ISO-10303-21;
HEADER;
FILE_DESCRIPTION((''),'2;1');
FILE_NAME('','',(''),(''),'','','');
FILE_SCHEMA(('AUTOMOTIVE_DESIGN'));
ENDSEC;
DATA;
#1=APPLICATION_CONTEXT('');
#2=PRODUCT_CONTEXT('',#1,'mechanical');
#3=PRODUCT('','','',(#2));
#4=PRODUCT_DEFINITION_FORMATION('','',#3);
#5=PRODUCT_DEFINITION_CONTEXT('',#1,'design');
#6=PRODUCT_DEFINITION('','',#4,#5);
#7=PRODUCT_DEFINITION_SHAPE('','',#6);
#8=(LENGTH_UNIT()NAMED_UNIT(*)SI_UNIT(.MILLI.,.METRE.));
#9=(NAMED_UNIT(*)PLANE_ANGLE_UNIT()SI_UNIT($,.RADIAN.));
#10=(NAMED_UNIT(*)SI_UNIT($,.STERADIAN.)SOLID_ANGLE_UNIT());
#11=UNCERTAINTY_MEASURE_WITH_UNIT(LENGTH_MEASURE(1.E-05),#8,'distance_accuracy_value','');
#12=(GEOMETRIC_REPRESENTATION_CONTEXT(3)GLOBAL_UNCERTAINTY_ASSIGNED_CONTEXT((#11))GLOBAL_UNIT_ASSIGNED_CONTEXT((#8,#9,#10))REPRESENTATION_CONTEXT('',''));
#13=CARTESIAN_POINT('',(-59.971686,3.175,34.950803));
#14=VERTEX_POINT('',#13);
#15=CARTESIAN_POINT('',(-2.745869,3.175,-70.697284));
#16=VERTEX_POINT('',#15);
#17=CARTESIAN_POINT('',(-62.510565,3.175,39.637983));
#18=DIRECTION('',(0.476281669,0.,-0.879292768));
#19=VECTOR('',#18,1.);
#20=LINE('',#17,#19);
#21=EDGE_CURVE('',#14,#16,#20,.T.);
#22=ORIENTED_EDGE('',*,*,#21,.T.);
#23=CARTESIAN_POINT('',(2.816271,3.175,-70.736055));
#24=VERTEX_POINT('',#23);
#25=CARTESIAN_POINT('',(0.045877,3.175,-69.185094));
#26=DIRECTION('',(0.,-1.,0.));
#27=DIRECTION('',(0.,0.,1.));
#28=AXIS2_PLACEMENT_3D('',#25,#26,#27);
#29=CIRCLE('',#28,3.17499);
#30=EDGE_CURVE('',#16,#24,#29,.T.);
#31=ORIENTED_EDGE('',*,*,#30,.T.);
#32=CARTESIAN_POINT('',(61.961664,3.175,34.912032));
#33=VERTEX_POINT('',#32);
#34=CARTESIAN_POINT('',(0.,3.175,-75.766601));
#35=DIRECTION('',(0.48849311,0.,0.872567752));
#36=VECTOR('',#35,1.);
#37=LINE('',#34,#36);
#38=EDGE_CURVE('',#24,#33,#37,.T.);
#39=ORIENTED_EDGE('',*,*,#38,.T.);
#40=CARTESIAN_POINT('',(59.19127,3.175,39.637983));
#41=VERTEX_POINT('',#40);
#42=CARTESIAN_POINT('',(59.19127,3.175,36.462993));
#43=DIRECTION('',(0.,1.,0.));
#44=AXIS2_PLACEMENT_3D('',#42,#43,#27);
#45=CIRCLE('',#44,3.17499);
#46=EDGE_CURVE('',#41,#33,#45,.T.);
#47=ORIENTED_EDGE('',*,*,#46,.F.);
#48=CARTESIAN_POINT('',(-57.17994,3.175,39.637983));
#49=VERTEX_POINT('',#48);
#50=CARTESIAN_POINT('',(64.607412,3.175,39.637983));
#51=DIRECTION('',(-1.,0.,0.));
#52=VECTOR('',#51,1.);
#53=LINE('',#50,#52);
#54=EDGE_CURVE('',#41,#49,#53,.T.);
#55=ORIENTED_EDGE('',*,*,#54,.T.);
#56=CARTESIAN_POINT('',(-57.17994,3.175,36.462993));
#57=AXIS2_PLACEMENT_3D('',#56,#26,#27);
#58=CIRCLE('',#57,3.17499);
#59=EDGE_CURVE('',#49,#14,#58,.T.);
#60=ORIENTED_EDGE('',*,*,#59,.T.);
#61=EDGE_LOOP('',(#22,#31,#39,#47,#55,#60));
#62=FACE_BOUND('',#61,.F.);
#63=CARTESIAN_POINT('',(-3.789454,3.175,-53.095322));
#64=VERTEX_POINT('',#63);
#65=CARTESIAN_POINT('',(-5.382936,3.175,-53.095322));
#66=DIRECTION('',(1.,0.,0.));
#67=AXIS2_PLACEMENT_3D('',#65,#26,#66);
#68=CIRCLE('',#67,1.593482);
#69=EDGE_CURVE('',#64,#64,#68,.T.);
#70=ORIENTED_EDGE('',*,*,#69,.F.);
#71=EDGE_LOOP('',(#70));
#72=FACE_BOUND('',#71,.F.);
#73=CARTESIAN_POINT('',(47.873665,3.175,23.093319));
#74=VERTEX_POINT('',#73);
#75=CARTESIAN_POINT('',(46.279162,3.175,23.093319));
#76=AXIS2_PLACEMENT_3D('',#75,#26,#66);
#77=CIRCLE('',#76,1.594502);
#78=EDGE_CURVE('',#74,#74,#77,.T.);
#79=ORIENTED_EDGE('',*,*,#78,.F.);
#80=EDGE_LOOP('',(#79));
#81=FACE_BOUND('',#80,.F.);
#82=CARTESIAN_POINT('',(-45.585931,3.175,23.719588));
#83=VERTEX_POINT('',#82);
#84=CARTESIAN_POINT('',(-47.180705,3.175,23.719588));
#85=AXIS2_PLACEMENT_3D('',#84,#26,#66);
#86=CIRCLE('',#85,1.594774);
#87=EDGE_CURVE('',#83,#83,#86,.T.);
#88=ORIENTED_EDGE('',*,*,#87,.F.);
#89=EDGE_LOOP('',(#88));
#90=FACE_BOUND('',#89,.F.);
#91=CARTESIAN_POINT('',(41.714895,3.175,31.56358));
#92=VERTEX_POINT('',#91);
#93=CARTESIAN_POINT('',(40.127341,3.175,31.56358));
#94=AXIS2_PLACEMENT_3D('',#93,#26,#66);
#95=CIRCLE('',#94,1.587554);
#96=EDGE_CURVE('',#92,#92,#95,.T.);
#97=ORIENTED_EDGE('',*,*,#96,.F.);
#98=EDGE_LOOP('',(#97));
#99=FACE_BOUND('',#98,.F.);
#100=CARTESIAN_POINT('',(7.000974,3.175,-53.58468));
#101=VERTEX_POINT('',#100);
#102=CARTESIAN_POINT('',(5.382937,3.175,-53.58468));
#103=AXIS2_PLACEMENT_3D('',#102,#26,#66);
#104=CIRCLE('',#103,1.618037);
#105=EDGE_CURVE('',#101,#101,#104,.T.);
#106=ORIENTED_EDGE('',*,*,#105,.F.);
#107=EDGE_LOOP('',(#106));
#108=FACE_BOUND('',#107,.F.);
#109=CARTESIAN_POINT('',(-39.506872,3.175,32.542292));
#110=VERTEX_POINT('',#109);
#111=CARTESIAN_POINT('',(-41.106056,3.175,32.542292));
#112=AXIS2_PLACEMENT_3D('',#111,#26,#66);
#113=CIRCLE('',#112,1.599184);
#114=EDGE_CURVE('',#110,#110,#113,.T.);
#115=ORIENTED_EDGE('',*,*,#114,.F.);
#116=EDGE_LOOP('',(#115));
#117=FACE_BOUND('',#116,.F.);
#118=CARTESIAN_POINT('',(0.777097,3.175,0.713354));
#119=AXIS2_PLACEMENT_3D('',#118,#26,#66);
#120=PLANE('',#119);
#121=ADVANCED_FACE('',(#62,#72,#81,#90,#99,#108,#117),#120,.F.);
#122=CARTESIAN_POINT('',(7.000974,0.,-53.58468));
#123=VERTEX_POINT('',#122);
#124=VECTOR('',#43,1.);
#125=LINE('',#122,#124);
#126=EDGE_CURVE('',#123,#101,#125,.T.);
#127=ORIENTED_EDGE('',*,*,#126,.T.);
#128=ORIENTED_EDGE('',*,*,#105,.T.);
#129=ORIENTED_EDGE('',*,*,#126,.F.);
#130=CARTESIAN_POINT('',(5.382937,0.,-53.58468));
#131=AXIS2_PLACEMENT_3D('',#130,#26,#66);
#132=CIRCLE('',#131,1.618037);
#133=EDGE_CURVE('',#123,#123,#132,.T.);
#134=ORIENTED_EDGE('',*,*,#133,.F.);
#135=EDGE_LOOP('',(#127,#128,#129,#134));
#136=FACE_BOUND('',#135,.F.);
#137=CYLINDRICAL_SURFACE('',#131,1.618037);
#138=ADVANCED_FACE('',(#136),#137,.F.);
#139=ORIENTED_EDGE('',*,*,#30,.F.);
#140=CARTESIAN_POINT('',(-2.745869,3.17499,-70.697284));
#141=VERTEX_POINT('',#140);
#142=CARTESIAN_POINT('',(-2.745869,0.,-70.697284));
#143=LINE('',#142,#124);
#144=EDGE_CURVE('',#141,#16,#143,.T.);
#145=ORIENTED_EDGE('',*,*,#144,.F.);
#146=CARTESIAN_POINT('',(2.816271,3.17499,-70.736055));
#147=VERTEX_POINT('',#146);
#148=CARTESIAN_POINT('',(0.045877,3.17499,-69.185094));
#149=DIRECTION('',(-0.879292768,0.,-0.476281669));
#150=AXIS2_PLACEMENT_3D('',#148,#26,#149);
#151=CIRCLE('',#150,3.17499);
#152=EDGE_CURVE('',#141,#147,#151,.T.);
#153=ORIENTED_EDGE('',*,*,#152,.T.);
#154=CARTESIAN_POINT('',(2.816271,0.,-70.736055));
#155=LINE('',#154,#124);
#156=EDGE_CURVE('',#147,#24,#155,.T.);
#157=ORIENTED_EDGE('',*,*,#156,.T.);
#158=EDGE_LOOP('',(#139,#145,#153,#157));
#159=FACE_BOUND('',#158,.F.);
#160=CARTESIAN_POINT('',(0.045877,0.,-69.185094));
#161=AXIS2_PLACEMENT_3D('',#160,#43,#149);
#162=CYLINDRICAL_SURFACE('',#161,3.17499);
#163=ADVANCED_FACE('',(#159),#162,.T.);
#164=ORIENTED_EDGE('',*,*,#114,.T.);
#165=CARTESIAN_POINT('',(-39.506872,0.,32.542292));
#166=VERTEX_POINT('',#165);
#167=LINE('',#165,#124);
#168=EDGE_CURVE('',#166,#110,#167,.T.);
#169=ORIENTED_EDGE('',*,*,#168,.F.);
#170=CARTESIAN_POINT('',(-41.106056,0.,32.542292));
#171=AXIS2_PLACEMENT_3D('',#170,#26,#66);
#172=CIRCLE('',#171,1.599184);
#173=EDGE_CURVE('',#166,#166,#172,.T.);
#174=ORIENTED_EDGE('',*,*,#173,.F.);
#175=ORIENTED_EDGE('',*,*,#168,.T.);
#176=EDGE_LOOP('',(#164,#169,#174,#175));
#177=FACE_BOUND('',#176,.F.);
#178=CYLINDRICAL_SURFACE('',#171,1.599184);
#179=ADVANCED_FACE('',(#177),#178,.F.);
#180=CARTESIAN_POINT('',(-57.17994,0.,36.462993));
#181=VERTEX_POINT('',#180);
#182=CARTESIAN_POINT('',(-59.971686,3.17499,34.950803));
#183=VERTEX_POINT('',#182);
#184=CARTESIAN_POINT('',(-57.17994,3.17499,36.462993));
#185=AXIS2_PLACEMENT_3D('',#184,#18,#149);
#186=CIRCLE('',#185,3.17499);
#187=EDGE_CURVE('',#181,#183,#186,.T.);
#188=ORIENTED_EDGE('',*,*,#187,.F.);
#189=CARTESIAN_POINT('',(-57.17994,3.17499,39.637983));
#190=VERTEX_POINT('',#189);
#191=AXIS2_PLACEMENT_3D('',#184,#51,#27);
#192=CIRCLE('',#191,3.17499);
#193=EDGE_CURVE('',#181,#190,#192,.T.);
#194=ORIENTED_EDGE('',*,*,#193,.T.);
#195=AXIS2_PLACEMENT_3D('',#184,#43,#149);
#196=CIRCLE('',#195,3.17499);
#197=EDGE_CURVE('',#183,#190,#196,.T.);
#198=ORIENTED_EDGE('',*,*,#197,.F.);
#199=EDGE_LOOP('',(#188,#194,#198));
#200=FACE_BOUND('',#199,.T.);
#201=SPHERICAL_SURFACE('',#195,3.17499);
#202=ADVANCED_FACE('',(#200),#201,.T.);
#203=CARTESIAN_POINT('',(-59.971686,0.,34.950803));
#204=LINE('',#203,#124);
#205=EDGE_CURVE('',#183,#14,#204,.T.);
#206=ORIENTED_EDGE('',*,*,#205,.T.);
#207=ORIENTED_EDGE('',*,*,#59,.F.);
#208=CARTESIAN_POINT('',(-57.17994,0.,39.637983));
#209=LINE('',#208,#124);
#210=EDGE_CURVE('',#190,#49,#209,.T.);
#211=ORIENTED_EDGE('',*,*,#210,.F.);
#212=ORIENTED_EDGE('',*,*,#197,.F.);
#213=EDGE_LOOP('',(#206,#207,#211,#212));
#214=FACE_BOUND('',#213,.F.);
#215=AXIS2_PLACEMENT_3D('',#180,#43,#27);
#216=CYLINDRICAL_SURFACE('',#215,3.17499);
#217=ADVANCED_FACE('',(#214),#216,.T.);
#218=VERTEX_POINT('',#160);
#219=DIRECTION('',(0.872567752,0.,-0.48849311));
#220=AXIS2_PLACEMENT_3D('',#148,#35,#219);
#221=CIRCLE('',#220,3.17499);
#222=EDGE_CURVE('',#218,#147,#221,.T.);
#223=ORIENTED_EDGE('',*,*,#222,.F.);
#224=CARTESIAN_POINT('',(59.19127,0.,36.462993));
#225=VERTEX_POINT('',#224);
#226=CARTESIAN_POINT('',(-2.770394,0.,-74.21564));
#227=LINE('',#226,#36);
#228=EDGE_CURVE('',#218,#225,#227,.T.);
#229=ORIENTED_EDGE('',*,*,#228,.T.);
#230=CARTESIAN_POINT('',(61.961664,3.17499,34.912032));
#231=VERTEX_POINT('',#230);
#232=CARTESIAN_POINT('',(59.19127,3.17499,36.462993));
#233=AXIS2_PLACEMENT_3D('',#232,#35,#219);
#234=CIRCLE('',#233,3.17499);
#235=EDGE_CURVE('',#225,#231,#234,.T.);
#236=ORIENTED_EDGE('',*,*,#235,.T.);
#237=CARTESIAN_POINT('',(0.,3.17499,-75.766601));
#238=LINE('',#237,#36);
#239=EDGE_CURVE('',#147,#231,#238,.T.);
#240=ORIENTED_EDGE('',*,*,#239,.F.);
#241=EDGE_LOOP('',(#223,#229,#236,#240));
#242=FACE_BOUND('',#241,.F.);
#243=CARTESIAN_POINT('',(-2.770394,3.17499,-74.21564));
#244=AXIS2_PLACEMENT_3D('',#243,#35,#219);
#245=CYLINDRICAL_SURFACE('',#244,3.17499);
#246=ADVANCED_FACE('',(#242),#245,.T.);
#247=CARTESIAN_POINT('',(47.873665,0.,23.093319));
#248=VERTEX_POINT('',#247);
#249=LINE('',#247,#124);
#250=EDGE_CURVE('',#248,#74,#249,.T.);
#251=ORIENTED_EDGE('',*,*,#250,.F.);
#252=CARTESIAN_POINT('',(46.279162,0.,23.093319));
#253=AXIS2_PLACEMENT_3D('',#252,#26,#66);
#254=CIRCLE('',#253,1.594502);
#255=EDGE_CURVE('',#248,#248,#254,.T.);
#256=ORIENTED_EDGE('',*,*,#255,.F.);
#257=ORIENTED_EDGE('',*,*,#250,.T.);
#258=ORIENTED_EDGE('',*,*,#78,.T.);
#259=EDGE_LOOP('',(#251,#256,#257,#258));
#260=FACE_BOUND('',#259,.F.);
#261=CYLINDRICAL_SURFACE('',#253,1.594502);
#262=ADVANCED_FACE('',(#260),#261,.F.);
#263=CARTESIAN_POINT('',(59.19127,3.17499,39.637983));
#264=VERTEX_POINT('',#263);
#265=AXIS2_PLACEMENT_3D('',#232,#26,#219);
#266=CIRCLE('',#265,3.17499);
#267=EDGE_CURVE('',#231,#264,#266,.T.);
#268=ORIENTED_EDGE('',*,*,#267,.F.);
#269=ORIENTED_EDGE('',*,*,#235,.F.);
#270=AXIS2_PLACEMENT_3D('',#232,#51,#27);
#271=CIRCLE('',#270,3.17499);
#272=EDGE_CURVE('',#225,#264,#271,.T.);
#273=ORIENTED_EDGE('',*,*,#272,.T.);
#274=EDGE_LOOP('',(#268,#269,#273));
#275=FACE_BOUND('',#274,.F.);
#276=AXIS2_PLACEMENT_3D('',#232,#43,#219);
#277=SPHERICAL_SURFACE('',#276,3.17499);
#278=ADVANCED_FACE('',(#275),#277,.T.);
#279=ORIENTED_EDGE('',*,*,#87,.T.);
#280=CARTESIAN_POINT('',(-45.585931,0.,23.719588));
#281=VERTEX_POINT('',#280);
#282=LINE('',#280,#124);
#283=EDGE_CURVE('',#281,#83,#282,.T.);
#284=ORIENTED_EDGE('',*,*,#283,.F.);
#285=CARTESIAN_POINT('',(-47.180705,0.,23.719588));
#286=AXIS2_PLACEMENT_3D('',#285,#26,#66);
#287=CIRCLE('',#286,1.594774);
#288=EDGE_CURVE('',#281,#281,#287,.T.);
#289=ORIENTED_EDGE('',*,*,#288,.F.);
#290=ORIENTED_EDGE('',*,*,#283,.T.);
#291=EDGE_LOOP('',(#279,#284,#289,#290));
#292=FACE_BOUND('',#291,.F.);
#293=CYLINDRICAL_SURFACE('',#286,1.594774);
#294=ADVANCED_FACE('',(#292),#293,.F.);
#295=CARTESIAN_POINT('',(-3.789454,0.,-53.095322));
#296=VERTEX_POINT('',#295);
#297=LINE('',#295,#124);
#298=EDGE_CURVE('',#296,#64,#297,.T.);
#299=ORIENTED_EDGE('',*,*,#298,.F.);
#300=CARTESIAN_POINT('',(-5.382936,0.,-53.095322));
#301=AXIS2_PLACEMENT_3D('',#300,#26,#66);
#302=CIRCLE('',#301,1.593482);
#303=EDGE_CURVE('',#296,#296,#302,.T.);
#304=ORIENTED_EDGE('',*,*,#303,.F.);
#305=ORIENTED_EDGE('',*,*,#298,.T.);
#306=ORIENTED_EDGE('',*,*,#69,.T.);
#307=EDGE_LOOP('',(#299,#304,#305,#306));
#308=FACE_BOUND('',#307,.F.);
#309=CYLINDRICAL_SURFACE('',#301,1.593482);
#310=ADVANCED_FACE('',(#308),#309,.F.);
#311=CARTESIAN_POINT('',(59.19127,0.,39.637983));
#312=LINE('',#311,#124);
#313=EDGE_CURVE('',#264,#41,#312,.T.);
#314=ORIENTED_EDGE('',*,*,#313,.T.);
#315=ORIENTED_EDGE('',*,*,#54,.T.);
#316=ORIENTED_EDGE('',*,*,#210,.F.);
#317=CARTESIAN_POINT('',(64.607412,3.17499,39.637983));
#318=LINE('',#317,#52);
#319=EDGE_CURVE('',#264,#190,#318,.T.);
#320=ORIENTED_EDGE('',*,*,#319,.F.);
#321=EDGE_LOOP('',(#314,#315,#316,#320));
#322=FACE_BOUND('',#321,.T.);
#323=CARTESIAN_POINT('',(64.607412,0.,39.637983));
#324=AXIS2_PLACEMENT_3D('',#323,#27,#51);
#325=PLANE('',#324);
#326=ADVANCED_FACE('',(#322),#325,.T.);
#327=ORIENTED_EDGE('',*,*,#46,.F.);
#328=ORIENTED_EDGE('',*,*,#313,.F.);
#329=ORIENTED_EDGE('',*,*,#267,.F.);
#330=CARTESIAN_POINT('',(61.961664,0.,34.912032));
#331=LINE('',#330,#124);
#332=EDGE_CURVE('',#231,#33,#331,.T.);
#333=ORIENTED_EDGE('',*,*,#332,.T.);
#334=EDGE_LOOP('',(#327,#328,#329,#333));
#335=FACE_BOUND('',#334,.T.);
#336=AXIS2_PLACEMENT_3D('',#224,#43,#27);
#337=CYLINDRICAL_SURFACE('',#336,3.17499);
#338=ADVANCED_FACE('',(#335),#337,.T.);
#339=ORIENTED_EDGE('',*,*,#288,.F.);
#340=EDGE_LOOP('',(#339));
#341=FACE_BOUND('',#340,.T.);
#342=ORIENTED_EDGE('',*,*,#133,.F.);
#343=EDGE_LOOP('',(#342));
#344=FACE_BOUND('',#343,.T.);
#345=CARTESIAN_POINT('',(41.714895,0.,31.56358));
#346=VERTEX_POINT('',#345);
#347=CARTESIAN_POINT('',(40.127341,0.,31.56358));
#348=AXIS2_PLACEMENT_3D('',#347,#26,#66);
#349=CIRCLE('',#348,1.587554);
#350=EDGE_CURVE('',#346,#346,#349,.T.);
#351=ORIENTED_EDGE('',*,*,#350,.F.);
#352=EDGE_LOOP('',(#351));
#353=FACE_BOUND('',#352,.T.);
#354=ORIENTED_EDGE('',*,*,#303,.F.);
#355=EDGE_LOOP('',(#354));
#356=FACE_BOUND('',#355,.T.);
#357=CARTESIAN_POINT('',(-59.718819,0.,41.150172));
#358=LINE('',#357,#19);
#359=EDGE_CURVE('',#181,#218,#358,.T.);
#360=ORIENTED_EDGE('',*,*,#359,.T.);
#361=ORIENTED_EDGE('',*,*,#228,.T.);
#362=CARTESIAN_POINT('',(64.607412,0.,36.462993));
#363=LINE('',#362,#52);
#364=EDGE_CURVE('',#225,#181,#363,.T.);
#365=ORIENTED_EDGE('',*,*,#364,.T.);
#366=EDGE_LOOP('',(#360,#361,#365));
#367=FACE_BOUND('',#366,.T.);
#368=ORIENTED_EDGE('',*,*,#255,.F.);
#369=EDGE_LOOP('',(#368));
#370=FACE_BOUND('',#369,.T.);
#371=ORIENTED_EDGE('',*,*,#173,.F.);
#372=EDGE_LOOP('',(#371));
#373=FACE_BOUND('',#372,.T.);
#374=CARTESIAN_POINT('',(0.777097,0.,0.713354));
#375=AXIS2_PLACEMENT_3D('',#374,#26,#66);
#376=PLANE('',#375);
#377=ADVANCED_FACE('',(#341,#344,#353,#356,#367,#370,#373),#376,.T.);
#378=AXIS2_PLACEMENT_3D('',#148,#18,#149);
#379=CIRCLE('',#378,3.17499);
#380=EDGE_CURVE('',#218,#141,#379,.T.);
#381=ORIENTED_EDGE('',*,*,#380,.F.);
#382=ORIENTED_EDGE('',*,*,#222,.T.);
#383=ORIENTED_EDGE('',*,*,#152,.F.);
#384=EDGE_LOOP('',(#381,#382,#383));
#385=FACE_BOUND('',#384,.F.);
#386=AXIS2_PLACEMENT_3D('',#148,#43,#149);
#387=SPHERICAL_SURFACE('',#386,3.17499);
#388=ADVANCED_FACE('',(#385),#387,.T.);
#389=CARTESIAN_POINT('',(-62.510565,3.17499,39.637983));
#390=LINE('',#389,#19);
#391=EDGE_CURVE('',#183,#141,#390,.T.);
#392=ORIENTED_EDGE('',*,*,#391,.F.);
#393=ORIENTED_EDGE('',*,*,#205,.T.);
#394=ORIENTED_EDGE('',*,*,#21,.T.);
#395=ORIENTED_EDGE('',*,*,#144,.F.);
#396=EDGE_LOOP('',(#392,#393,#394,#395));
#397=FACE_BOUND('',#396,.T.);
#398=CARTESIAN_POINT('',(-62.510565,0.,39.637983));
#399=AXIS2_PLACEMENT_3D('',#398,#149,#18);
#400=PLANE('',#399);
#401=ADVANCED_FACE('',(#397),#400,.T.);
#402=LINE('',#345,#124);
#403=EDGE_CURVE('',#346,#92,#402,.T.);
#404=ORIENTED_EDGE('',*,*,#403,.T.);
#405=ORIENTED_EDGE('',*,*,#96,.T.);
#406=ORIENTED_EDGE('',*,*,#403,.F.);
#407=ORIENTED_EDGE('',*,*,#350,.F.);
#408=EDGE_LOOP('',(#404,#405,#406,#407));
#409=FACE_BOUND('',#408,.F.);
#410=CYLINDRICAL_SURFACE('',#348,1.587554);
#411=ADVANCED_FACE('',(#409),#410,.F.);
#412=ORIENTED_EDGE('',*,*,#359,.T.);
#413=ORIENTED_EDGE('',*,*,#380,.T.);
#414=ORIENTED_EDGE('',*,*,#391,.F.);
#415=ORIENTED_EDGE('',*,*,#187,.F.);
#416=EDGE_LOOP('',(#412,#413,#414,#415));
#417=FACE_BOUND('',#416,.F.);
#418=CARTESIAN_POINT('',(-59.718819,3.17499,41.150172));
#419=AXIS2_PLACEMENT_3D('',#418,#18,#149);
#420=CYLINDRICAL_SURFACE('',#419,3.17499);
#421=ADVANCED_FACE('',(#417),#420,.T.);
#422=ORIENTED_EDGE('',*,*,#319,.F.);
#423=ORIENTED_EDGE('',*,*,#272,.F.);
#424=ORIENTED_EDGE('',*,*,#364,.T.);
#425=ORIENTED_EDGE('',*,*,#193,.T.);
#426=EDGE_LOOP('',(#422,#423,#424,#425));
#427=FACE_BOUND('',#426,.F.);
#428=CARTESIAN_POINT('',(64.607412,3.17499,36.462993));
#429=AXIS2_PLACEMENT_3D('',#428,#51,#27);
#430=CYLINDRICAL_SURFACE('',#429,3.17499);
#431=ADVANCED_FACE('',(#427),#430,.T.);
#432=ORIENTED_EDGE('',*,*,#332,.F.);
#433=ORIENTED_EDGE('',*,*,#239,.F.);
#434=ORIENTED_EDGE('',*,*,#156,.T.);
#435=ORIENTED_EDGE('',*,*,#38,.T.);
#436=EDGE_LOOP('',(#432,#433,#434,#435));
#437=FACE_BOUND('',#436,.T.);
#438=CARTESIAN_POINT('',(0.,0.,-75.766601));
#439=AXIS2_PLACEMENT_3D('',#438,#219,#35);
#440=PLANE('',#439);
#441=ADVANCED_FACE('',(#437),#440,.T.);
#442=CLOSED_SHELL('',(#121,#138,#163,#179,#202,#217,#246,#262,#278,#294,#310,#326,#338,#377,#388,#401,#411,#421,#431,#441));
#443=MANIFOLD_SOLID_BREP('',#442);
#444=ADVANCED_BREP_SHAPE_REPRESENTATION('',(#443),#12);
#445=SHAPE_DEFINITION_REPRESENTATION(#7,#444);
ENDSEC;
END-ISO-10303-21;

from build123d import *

# Parameters (mm, degrees)
F0_R     = 1.5934819676
F0_R_2   = 1.6180372771
F0_R_3   = 1.5947735427
F0_R_4   = 1.599183997
F0_R_5   = 1.5713503285
F0_R_6   = 1.584959903
F0_R_7   = 1.5945023752
F0_R_8   = 1.5875542678
F1_DEPTH = 3.175
F2_R     = 3.17499


# Not quite as in the source:
# - a fillet or chamfer is up to 0.001 mm smaller than in the source, because OpenCascade refuses the exact size


with BuildPart() as f1:
    # F0 (on Front) → F1 (new body)
    with BuildSketch(Plane.XZ):
        Polygon((64.607411623, 39.6379828453), (-62.5105649233, 39.6379828453), (0, -75.7666006684), align=None)
        with Locations((-5.3829359822, -53.0953221023)):
            Circle(F0_R, mode=Mode.SUBTRACT)
        with Locations((5.3829369135, -53.5846799612)):
            Circle(F0_R_2, mode=Mode.SUBTRACT)
        with Locations((-47.1807047725, 23.7195882946)):
            Circle(F0_R_3, mode=Mode.SUBTRACT)
        with Locations((-41.106056422, 32.5422920287)):
            Circle(F0_R_4, mode=Mode.SUBTRACT)
        with Locations((-6.8510090932, 33.5210077465)):
            Circle(F0_R_5, mode=Mode.SUBTRACT)
        with Locations((7.829724811, 33.5210077465)):
            Circle(F0_R_6, mode=Mode.SUBTRACT)
        with Locations((46.2791621685, 23.0933185667)):
            Circle(F0_R_7, mode=Mode.SUBTRACT)
        with Locations((40.1273407042, 31.5635800362)):
            Circle(F0_R_8, mode=Mode.SUBTRACT)
        with Locations((7.829724811, 33.5210077465)):
            Circle(F0_R_6)
        with Locations((-6.8510090932, 33.5210077465)):
            Circle(F0_R_5)
    extrude(amount=-F1_DEPTH)

    # F2 (radius 3.175 in the source; OpenCascade refuses exactly that, so slightly less here)
    f2_edges = [f1.edges().sort_by_distance(p)[0] for p in [
        (64.607412, 1.5875, 39.637983),
        (-62.510565, 1.5875, 39.637983),
        (0, 1.5875, -75.766601),
        (-31.255282, 0, -18.064309),
        (32.303706, 0, -18.064309),
        (1.048423, 0, 39.637983),
    ]]
    fillet(f2_edges, radius=F2_R)


solid = f1.part
